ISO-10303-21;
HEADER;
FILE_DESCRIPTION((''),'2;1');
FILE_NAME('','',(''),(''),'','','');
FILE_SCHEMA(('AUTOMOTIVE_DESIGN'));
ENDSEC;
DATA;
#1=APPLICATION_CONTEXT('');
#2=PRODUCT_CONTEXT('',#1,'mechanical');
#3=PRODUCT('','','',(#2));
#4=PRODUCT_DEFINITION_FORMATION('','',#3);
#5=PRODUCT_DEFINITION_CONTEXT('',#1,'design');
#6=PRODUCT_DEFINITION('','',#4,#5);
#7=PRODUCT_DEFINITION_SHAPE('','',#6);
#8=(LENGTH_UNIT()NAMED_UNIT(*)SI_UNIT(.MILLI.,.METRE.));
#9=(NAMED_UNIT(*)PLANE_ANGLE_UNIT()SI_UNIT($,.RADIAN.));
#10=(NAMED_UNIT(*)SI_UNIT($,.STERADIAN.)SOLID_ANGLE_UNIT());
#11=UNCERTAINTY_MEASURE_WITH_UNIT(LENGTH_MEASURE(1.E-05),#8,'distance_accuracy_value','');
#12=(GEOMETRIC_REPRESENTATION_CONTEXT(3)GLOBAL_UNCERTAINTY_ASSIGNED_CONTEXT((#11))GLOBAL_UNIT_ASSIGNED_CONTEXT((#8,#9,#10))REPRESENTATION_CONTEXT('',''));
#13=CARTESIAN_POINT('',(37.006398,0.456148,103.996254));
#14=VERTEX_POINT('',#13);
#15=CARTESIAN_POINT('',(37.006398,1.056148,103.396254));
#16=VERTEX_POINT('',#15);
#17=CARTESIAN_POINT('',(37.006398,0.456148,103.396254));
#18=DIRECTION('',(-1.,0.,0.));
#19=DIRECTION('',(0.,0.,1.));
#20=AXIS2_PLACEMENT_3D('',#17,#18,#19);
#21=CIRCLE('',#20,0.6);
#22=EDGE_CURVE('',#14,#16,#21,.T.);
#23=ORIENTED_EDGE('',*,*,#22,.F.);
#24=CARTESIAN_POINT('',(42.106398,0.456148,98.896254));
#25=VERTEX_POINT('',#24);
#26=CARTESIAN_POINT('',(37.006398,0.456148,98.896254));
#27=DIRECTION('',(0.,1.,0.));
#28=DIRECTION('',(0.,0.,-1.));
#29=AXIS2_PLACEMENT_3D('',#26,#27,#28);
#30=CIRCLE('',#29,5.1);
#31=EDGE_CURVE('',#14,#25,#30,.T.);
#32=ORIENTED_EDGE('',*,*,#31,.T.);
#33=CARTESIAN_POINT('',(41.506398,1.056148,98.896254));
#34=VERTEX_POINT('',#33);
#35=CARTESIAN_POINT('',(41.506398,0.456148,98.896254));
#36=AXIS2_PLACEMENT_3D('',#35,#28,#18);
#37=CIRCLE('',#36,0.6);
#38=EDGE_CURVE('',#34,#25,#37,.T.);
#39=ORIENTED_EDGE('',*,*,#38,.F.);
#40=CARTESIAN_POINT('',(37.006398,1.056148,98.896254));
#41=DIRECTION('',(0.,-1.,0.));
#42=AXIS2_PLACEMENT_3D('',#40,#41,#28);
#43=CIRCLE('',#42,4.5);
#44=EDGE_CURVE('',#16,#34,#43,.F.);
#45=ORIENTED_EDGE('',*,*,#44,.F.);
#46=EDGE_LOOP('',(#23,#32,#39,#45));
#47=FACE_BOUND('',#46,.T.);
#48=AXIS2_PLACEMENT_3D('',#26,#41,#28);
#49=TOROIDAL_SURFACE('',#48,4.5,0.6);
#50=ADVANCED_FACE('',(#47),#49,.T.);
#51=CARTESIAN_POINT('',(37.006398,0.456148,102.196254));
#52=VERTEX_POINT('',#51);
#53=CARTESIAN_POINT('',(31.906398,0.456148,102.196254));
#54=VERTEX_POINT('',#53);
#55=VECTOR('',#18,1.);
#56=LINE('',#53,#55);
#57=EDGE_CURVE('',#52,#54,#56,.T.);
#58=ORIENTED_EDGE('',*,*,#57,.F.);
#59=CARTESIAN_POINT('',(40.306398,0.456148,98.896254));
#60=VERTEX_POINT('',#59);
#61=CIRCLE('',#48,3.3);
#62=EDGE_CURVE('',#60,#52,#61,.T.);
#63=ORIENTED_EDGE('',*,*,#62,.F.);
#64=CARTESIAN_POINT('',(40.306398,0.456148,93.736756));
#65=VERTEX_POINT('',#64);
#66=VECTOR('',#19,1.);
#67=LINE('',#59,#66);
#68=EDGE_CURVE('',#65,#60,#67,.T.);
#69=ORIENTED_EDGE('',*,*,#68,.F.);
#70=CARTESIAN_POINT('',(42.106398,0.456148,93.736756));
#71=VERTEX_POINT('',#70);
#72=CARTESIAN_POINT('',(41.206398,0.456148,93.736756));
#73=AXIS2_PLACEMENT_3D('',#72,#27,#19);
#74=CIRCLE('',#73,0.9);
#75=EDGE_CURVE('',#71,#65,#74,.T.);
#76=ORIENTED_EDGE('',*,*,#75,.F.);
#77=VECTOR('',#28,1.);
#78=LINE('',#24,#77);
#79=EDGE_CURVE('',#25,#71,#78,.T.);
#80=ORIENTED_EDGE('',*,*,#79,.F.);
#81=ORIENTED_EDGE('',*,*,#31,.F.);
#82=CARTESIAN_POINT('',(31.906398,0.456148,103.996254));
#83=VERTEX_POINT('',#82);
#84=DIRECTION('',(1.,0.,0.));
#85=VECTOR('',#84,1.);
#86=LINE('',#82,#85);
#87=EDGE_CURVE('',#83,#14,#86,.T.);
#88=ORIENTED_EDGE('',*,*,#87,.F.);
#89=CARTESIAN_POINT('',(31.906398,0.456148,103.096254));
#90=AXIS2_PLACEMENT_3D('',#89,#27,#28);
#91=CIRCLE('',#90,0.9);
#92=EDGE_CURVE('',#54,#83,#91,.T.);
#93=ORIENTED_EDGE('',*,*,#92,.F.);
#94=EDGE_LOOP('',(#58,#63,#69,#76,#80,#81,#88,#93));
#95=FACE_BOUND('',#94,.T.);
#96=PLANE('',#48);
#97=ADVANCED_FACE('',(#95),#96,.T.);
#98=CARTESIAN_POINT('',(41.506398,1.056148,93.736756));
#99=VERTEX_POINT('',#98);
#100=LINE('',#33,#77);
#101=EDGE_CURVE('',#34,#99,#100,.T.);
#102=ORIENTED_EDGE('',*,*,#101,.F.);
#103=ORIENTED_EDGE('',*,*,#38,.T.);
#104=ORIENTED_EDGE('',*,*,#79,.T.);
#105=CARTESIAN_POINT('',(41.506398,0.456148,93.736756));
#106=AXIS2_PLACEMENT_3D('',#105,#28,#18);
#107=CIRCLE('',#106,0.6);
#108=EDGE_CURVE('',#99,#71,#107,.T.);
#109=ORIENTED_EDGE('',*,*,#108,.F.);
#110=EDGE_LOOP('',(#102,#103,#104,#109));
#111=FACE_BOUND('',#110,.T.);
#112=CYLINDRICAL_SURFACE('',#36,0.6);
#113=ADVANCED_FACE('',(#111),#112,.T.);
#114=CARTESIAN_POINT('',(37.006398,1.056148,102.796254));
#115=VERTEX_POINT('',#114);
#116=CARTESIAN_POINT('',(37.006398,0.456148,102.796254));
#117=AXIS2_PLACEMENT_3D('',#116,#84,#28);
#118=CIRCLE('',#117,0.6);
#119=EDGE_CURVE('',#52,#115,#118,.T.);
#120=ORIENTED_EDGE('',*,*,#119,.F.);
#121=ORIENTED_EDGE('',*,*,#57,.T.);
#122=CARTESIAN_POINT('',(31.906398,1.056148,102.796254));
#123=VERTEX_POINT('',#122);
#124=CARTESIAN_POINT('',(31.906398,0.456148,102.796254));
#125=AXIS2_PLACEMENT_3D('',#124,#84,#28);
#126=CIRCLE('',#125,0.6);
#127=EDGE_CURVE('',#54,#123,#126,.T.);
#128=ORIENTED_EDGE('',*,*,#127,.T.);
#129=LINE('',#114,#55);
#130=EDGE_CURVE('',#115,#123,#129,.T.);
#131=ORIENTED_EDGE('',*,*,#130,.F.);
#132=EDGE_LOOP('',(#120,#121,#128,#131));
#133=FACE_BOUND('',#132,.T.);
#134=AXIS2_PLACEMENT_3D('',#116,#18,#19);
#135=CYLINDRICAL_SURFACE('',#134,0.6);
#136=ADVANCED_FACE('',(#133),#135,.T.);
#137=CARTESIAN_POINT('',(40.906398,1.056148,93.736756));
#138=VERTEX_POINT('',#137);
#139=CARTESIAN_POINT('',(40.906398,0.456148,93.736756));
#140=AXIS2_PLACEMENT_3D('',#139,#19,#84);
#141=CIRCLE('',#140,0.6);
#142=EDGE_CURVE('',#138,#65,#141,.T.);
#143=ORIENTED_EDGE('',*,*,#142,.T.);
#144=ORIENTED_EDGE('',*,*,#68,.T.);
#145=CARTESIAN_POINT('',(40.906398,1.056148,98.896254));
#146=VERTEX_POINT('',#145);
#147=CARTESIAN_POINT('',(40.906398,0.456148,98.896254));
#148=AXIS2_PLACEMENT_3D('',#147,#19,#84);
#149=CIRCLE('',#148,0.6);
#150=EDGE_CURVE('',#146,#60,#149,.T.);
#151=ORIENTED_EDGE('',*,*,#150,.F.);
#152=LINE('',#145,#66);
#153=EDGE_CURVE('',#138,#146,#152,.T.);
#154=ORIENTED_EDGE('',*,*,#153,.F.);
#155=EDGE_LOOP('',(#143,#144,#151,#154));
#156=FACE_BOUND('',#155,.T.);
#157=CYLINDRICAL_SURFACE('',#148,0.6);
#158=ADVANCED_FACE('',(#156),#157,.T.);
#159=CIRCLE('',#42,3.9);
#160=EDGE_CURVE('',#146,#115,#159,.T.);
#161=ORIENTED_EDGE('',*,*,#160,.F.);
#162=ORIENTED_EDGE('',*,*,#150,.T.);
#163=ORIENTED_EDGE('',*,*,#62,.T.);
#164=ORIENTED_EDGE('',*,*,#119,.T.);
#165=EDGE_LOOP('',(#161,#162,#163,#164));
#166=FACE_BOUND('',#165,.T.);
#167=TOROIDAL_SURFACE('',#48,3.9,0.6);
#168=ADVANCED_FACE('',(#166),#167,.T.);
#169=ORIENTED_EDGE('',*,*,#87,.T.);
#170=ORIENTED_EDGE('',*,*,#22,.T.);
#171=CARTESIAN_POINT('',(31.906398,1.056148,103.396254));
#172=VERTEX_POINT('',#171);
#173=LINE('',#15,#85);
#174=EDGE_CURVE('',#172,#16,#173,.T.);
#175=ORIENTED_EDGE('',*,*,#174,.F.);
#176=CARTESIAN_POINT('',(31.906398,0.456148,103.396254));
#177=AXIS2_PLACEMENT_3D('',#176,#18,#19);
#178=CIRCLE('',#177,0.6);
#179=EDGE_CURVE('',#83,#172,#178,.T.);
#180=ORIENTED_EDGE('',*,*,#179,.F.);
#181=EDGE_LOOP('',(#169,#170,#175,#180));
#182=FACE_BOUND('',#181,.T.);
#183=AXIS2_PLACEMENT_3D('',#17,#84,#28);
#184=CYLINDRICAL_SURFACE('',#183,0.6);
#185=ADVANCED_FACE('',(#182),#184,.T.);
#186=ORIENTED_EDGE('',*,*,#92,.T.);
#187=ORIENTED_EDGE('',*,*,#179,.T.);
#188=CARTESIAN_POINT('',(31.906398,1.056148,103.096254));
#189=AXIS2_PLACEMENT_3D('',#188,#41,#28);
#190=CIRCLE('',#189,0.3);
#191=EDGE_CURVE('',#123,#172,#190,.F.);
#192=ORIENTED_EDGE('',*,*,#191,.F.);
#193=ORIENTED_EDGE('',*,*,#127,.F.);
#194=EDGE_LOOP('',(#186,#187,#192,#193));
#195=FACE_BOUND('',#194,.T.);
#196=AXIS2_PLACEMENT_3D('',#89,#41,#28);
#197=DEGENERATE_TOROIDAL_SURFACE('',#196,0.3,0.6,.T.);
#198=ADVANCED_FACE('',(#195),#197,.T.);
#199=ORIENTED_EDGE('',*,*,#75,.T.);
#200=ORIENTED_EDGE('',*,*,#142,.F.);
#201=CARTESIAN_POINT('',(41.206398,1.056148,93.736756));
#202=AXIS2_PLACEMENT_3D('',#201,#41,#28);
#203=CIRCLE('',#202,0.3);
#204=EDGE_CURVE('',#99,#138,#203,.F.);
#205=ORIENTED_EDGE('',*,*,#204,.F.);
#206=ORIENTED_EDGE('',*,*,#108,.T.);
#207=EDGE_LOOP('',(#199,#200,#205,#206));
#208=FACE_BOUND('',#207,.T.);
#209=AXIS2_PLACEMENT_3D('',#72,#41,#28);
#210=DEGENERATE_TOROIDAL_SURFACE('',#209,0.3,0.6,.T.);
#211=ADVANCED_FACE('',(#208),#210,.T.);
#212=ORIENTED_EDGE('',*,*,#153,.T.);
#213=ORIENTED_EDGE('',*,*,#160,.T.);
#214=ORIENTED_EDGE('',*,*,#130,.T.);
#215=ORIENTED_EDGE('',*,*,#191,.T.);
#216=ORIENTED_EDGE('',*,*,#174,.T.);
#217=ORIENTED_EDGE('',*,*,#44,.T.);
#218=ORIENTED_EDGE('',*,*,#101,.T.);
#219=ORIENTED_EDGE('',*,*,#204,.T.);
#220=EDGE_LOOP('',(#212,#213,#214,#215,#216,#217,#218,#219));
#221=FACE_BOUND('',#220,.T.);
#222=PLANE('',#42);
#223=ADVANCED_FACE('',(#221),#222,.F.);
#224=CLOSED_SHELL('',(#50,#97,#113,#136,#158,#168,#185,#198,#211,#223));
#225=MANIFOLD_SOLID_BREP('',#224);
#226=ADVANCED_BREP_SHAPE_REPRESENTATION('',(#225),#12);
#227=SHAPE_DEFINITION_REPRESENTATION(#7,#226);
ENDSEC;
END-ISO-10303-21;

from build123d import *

# Parameters (mm, degrees)
SALIENTE_EXTRUIR1_DEPTH = 0.6
REDONDEO1_R             = 0.6


with BuildPart() as part:
    # Croquis1 → Saliente-Extruir1 (new body)
    with BuildSketch(Plane(origin=(0, 0.456148123, 0), x_dir=(1, 0, 0), z_dir=(0, 1, 0))):
        with BuildLine():
            Line((31.906397954, -103.996253755), (37.006397954, -103.996253755))
            ThreePointArc((37.006397954, -103.996253755), (40.612642538, -102.502498339), (42.106397954, -98.896253755))
            Line((42.106397954, -98.896253755), (42.106397954, -93.736756225))
            ThreePointArc((42.106397954, -93.736756225), (41.206397954, -92.836756225), (40.306397954, -93.736756225))
            Line((40.306397954, -93.736756225), (40.306397954, -98.896253755))
            ThreePointArc((40.306397954, -98.896253755), (39.339850332, -101.229706133), (37.006397954, -102.196253755))
            Line((37.006397954, -102.196253755), (31.906397954, -102.196253755))
            ThreePointArc((31.906397954, -102.196253755), (31.006397954, -103.096253755), (31.906397954, -103.996253755))
        make_face()
    extrude(amount=SALIENTE_EXTRUIR1_DEPTH)

    # Redondeo1
    redondeo1_edges = [part.edges().sort_by_distance(p)[0] for p in [
        (40.306397954, 1.056148123, 96.31650499),
        (39.339850332, 1.056148123, 101.229706133),
        (42.106397954, 1.056148123, 96.31650499),
        (40.612642538, 1.056148123, 102.502498339),
        (41.206397954, 1.056148123, 92.836756225),
        (34.456397954, 1.056148123, 102.196253755),
        (31.006397954, 1.056148123, 103.096253755),
        (34.456397954, 1.056148123, 103.996253755),
    ]]
    fillet(redondeo1_edges, radius=REDONDEO1_R - 0.0001)  # a hair under: the kernel refuses the full size


solid = part.part
